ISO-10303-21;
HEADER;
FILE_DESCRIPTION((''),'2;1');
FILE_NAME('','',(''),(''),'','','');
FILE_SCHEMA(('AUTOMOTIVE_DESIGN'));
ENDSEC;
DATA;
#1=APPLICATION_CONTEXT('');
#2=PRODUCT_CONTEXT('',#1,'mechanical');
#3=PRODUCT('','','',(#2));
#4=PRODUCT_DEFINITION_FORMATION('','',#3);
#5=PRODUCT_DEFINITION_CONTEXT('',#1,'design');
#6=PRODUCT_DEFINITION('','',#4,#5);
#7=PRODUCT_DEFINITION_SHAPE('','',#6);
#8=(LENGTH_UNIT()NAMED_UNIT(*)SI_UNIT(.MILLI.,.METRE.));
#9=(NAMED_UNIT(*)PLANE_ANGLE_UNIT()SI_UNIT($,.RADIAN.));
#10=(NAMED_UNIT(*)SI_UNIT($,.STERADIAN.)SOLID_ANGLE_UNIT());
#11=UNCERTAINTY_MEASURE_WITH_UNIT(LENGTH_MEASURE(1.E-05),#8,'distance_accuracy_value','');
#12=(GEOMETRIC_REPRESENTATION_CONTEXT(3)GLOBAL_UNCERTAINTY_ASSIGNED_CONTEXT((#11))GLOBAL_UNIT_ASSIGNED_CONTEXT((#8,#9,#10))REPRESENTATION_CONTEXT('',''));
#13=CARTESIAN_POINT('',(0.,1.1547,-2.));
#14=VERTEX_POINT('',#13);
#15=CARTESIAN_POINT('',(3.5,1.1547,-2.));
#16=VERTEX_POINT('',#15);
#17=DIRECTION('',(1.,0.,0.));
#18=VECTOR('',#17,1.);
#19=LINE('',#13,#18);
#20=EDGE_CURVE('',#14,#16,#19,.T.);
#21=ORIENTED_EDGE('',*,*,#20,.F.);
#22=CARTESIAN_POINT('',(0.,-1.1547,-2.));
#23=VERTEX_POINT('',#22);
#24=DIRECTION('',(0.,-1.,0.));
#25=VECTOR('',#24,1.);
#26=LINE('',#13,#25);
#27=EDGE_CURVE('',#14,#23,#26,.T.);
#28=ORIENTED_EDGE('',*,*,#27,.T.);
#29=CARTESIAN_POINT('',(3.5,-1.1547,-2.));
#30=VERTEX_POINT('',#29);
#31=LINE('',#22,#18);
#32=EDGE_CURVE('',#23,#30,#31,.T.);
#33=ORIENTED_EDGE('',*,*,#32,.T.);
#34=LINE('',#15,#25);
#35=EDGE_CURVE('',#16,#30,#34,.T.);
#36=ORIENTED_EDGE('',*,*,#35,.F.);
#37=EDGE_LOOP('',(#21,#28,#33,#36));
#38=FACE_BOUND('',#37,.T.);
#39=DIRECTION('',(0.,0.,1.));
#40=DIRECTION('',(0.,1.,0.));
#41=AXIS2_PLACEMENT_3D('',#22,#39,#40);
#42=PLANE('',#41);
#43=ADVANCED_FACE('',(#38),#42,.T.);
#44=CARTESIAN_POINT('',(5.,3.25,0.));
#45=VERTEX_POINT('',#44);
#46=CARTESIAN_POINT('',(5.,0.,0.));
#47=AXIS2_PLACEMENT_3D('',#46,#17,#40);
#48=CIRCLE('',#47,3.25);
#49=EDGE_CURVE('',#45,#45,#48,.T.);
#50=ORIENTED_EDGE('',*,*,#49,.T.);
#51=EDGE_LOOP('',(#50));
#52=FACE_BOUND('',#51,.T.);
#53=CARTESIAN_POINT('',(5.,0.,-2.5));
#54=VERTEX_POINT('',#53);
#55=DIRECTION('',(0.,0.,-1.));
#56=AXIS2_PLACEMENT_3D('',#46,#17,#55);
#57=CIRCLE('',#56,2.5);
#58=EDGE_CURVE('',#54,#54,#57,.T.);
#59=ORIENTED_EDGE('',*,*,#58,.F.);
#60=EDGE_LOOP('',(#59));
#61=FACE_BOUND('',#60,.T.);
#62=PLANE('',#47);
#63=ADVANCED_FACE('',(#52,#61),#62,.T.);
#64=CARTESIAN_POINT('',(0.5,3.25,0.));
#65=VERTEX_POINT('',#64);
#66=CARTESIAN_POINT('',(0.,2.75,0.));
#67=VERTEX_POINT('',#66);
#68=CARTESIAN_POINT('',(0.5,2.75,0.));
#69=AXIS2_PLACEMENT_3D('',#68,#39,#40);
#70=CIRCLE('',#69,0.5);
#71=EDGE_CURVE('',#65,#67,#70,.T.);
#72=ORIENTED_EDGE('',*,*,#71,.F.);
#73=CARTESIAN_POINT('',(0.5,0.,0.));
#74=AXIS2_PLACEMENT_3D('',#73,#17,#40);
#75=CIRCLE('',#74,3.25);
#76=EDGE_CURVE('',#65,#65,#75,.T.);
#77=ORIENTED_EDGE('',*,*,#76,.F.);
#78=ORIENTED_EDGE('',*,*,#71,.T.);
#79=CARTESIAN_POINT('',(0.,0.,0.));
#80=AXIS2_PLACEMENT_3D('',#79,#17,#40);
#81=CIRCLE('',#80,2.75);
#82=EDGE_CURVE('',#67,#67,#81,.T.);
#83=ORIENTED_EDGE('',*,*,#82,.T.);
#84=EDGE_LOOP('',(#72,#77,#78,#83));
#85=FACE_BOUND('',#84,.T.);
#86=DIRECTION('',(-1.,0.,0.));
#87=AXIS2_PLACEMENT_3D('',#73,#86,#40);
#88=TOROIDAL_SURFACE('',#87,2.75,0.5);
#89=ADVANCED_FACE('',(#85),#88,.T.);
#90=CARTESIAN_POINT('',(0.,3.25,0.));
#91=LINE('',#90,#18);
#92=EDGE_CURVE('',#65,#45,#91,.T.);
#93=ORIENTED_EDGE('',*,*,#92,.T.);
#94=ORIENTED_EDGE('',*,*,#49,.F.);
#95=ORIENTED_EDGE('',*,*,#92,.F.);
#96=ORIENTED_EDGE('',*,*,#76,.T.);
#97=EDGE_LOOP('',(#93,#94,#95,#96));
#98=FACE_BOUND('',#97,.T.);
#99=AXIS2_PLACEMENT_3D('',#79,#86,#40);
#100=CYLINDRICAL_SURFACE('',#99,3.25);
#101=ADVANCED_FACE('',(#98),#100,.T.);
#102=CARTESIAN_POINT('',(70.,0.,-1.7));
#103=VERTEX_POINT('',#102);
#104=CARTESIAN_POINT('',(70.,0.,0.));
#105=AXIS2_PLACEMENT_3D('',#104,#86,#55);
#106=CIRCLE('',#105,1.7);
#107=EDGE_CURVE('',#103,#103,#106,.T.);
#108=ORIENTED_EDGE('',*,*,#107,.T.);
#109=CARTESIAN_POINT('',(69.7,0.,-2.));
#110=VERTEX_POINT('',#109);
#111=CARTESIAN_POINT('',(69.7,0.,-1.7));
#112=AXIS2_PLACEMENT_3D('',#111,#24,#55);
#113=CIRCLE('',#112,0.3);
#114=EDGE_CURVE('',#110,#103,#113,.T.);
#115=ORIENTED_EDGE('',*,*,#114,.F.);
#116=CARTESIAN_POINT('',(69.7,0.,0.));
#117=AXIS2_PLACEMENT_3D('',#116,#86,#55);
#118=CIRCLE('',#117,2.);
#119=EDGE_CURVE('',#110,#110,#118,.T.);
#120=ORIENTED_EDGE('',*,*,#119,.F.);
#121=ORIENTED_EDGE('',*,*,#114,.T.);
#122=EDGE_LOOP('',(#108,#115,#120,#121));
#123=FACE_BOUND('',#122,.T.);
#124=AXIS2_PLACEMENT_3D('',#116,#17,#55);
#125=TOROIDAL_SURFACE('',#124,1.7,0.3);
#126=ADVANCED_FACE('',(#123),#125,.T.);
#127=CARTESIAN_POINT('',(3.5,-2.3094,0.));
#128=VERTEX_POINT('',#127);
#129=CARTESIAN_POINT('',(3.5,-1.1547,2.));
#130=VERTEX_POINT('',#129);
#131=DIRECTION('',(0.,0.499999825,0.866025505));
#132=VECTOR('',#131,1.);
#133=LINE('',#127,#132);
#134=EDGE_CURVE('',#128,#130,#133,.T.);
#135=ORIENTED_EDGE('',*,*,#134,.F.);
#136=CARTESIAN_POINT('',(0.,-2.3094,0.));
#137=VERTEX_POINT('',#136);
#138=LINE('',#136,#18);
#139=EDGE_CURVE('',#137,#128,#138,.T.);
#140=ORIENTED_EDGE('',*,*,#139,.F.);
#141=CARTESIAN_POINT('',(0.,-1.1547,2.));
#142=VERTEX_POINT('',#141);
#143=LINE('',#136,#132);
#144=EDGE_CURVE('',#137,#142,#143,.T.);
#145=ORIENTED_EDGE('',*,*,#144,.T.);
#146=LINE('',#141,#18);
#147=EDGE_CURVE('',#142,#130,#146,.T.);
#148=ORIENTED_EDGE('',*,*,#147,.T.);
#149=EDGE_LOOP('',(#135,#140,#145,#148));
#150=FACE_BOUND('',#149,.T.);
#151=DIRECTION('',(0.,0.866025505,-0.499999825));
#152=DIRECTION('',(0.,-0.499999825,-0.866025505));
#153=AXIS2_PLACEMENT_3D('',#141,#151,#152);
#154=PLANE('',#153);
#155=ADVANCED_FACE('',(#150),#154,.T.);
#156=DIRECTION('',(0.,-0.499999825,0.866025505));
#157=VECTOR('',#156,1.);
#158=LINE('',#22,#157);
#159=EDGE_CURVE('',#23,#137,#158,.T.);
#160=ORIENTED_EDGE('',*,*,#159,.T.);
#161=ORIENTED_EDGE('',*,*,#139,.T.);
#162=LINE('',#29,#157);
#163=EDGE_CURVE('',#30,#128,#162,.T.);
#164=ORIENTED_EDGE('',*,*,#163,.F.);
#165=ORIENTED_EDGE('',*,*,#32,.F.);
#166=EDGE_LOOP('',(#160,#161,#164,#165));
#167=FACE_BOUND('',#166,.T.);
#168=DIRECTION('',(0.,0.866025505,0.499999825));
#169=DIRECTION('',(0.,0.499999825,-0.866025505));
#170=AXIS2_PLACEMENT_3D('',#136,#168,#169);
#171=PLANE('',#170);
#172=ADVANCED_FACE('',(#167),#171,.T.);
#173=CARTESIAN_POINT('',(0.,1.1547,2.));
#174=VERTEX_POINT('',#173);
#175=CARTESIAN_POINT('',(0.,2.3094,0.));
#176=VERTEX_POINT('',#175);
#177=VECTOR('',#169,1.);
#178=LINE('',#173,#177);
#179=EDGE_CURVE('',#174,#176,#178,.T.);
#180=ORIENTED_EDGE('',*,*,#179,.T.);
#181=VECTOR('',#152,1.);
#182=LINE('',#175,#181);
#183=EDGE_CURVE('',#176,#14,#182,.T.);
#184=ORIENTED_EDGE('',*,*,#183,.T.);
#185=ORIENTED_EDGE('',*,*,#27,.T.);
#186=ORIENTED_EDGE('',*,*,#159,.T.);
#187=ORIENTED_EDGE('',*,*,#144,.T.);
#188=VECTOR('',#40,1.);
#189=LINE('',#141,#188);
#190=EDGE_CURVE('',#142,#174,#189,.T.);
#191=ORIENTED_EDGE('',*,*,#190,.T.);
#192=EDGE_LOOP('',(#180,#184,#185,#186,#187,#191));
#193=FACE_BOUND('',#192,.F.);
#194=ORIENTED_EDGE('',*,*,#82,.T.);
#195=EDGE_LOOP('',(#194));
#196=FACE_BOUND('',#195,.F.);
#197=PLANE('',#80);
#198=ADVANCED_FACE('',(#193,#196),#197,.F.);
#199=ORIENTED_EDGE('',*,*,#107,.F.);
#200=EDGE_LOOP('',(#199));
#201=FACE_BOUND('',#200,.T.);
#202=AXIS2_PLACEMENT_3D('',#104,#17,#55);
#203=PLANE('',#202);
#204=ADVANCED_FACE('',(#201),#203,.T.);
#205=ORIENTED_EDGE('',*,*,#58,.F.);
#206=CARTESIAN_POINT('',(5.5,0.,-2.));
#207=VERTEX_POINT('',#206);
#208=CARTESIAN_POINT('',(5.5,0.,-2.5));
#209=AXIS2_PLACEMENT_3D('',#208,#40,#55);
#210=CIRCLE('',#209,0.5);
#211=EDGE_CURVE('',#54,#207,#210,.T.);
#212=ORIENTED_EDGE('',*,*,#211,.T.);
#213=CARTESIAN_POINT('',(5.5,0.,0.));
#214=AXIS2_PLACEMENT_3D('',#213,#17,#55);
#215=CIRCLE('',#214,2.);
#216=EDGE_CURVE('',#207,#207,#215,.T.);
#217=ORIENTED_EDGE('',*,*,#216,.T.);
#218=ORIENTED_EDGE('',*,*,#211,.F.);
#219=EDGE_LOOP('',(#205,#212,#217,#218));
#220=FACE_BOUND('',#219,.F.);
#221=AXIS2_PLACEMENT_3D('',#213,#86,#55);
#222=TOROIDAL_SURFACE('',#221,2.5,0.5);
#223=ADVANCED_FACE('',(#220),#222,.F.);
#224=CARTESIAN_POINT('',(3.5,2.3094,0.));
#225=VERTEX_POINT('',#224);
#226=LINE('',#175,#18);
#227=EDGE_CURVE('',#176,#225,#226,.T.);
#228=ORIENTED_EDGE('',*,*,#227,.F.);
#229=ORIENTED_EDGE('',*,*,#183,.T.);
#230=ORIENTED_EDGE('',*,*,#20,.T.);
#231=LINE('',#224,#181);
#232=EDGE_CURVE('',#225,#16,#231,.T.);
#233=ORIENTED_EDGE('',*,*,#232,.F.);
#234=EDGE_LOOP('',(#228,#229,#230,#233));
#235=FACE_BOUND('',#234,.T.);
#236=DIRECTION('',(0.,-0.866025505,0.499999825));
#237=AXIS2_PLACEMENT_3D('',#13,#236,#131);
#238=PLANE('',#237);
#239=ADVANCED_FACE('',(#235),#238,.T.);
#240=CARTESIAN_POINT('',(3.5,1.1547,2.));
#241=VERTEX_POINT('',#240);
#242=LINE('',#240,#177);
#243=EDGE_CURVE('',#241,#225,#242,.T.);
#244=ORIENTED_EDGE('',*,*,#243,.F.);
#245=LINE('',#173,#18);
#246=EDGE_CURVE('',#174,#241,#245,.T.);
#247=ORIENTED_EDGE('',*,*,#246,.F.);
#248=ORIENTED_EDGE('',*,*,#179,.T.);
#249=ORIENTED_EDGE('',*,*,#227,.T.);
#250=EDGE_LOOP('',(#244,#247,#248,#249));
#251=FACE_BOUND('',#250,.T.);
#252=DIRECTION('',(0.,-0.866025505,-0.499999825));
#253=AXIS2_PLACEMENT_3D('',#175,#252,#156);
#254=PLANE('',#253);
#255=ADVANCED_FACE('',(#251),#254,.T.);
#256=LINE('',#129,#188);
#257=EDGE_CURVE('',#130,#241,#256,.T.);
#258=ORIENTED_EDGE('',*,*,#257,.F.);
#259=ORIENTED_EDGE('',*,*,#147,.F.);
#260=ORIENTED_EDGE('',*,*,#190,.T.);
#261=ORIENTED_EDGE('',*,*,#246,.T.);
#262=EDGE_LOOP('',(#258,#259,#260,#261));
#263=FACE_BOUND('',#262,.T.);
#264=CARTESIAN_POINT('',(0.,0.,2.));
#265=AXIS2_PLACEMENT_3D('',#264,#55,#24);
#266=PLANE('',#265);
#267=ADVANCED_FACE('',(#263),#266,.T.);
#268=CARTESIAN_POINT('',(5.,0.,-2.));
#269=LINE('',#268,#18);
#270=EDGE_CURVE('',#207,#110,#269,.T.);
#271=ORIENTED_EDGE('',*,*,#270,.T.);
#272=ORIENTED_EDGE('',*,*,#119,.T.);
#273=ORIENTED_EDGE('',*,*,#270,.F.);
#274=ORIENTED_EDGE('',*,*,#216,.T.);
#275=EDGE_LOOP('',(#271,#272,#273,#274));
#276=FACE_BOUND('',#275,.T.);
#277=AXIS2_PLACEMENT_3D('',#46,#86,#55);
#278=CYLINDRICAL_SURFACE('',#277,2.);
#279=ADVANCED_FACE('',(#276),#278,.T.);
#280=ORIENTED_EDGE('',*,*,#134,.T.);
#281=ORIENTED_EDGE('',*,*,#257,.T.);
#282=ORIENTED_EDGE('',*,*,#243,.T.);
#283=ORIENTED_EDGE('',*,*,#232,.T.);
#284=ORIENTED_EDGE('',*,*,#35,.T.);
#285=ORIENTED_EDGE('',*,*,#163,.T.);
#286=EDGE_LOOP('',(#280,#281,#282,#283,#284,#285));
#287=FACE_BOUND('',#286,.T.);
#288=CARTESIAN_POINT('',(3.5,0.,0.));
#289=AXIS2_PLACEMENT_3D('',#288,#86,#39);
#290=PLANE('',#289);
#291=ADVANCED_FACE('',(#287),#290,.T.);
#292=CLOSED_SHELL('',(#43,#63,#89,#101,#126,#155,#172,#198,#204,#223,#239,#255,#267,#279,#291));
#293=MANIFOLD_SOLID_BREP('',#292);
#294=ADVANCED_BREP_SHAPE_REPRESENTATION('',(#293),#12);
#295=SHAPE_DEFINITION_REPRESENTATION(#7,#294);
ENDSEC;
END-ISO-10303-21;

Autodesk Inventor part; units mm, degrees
ref_plane "YZ Plane" through (0, 0, 0) normal (1, 0, 0) x (0, 1, 0)
ref_plane "XZ Plane" through (0, 0, 0) normal (0, 1, 0) x (-1, 0, 0)
ref_plane "XY Plane" through (0, 0, 0) normal (0, 0, 1) x (1, 0, 0)
sketch "Sketch1" plane through (0, 0, 0) normal (1, 0, 0) x (0, 1, 0)
  circle A0 centre (0, 0) radius 3.25
  circle A1 centre (0, 0) radius 2
  dimension "d0" = 6.5
  dimension "d1" = 4
extrude "Extrusion1" add sketch "Sketch1" along normal blind 5 contours A0 | A1
sketch "Sketch2" plane through (5, 0, 0) normal (1, 0, 0) x (0, 0, -1)
  circle A0 centre (0, 0) radius 2
  dimension "d4" = 4
extrude "Extrusion2" add sketch "Sketch2" along normal blind 70
sketch "Sketch3" plane through (0, 0, 0) normal (-1, 0, 0) x (0, 0, 1)
  circle A0 centre (0, 0) radius 2 projected
  line L0 (2, -1.1547) -> (0, -2.3094)
  line L1 (0, -2.3094) -> (-2, -1.1547)
  line L2 (-2, -1.1547) -> (-2, 1.1547)
  line L3 (-2, 1.1547) -> (0, 2.3094)
  line L4 (0, 2.3094) -> (2, 1.1547)
  line L5 (2, 1.1547) -> (2, -1.1547)
  point P0 (2, 0)
extrude "Extrusion3" cut sketch "Sketch3" against normal blind 3.5
thread "Thread1" size "M4x0.7" class "6g" standard "ANSI Metric M Profile" length 15
fillet "Fillet1" radius 0.5 3 edges at (5, 0, 2) (0, -3.25, 0) (75, 0, 2)
sketch "Sketch4" plane through (75, 0, 0) normal (1, 0, 0) x (0, 0, -1)
  line L0 (-7.7054, 6.4284) -> (8.1646, 6.4284)
  line L1 (8.1646, 6.4284) -> (8.1646, -6.8875)
  line L2 (8.1646, -6.8875) -> (-7.7054, -6.8875)
  line L3 (-7.7054, -6.8875) -> (-7.7054, 6.4284)
  point P0 (0, 0)
extrude "Extrusion4" cut sketch "Sketch4" against normal blind 5
fillet "Fillet2" radius 0.3 1 edges at (70, 0, 2)
properties part number "m4x70_example" material "Stainless Steel"
